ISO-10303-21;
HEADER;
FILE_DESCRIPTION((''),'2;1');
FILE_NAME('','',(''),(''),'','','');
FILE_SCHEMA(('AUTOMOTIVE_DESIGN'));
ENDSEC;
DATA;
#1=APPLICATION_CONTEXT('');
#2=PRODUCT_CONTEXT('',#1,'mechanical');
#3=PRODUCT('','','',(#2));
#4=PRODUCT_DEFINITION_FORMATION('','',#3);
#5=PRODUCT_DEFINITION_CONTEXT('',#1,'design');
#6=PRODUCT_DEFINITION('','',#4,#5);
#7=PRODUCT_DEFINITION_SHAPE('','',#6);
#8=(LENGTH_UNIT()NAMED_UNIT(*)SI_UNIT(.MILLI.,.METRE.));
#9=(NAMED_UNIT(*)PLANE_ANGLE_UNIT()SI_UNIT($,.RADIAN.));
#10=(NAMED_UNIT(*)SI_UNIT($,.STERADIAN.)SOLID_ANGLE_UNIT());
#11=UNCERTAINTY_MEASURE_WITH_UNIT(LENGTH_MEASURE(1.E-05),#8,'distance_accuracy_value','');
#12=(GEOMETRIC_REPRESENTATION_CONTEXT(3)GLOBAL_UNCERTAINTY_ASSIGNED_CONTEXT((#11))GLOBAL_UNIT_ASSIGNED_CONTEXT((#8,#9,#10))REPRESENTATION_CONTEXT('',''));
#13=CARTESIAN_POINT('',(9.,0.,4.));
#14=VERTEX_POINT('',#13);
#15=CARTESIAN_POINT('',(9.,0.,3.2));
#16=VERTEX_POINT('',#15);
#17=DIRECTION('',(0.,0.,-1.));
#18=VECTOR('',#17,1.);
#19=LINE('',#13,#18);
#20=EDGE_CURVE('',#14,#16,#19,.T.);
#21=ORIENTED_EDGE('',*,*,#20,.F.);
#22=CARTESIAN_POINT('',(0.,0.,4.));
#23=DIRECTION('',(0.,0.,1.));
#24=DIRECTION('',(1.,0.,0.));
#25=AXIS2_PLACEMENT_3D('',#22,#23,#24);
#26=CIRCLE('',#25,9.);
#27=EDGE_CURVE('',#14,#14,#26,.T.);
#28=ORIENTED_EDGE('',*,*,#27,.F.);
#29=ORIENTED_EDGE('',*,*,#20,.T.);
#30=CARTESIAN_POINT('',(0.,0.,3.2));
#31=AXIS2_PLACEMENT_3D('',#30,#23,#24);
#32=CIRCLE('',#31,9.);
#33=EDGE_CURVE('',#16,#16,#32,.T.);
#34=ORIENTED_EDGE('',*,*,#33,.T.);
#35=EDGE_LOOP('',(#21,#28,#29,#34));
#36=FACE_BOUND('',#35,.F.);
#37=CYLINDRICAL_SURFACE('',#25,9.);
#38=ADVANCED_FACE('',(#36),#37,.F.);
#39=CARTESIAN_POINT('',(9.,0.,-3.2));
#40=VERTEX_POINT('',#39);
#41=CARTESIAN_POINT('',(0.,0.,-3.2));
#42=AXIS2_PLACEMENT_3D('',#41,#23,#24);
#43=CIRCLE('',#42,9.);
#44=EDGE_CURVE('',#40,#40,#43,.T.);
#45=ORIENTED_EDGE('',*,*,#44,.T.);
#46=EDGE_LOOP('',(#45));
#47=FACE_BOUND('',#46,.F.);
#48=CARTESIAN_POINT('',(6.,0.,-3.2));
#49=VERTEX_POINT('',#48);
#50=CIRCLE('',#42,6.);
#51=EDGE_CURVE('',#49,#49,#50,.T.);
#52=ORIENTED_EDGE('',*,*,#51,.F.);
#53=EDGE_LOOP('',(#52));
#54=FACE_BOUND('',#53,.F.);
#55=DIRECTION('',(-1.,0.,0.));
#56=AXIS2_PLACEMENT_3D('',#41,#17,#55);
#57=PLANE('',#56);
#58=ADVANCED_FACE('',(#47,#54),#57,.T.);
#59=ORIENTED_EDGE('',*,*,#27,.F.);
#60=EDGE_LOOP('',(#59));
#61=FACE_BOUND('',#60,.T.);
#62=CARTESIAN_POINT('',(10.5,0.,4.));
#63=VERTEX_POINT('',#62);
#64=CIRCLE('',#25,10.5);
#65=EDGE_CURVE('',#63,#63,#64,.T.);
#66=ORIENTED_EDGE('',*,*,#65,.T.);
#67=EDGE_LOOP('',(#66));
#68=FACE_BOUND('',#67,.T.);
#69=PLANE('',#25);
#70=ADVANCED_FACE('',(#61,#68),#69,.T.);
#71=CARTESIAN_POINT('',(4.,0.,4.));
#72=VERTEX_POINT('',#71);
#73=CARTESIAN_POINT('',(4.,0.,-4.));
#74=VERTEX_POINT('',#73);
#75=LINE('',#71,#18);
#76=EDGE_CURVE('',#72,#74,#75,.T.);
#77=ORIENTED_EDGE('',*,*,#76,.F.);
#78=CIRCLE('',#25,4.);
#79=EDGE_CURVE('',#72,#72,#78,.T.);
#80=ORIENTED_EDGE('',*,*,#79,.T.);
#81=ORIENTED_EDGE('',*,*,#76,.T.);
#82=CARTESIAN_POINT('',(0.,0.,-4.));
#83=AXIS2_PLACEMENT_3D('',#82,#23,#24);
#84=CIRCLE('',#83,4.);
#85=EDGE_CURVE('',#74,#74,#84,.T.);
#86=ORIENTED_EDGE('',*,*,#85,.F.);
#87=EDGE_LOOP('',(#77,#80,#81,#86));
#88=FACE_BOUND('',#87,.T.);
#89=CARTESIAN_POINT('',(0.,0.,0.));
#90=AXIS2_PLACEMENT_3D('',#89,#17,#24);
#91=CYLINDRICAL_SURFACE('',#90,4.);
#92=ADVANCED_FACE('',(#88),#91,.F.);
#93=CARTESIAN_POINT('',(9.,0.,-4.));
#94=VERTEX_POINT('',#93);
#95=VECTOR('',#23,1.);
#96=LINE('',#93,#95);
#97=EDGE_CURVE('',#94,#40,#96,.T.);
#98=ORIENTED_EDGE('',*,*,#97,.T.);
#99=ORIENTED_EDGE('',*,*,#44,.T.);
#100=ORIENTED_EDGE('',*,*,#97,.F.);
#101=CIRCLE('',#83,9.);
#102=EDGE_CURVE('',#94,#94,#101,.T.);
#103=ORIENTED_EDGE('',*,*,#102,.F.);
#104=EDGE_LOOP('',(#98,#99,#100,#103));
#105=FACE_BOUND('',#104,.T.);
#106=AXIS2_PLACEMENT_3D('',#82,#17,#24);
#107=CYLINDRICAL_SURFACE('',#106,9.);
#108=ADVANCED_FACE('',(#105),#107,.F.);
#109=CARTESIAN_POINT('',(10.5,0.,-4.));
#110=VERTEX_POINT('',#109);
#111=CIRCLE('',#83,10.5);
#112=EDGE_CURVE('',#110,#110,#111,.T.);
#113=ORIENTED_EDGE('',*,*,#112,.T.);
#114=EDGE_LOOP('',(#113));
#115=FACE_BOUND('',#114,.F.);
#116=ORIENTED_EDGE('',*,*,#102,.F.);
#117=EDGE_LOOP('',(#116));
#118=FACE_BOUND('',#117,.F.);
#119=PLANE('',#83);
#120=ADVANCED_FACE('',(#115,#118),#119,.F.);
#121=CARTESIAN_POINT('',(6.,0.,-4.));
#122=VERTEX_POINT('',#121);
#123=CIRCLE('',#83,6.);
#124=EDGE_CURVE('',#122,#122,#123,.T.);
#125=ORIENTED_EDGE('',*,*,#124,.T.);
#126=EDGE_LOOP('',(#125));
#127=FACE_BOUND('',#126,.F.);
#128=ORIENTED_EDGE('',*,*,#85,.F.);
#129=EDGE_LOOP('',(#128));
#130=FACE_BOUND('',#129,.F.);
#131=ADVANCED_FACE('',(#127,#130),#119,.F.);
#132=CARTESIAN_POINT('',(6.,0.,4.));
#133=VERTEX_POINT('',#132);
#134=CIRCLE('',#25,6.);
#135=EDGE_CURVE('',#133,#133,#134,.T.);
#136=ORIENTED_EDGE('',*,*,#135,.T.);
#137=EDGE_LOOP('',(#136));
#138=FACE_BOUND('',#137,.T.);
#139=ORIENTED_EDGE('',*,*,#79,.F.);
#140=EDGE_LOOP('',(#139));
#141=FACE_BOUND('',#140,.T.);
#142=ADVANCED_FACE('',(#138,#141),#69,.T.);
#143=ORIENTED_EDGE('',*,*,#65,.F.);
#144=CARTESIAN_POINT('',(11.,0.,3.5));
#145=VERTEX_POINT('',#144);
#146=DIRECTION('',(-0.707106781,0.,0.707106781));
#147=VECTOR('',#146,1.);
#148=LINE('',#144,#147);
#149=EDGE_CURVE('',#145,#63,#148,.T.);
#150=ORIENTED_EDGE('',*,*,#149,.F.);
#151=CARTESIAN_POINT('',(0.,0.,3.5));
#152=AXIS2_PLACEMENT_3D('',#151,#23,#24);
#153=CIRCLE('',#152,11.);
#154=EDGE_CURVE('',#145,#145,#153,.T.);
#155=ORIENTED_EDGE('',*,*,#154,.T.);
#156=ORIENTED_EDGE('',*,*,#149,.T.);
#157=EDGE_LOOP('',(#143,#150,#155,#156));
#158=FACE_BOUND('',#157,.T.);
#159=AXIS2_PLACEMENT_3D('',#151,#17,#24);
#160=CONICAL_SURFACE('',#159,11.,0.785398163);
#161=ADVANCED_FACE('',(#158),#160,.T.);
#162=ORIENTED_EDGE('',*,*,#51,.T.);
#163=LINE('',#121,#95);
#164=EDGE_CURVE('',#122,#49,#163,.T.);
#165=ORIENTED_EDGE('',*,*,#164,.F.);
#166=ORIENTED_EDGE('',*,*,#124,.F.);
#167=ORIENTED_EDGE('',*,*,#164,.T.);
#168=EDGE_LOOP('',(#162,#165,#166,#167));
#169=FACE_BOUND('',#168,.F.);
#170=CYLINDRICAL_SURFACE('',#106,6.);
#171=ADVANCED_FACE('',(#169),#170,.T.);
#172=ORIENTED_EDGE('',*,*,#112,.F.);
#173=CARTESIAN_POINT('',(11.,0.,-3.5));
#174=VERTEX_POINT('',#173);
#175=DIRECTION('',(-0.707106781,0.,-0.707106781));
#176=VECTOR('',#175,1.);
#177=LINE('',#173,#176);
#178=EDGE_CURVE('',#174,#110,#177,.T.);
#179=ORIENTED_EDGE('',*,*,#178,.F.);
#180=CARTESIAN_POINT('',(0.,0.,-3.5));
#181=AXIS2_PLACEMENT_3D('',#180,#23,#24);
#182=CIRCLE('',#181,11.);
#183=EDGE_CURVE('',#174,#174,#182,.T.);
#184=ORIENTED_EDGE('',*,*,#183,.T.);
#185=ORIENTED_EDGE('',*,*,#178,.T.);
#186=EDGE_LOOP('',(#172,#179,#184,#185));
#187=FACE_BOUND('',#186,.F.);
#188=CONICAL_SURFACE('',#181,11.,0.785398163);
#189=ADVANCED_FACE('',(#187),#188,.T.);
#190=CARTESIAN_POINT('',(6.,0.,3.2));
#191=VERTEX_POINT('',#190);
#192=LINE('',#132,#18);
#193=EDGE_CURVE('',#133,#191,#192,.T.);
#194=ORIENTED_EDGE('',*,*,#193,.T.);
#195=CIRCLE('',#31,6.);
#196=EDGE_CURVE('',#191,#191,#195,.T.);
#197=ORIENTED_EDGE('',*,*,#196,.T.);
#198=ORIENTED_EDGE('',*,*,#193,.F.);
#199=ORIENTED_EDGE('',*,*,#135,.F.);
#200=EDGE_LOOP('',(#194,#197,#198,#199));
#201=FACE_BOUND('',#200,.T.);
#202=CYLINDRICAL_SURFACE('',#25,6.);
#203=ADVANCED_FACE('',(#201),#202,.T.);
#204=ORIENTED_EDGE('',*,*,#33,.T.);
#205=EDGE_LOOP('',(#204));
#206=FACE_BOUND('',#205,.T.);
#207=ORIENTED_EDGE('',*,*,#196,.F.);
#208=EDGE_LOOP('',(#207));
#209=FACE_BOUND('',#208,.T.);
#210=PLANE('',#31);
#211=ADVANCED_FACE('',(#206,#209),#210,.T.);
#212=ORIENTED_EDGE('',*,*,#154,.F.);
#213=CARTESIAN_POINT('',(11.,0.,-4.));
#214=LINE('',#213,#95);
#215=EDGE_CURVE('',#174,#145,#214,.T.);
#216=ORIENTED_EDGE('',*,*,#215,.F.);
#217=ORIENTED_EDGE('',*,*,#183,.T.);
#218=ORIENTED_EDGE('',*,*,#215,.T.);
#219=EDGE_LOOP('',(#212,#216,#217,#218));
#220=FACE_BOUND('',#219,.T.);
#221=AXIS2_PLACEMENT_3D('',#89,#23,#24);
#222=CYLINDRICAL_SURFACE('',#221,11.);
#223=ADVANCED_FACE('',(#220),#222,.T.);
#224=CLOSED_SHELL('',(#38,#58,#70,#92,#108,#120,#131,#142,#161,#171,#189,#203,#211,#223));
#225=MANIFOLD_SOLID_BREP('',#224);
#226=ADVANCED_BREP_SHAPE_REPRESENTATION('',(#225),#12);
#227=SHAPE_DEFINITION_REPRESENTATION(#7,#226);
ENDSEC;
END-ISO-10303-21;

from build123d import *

# Parameters (mm, degrees)
F0_R     = 11
F0_R_2   = 4
F1_DEPTH = 4
F2_R     = 9
F2_R_2   = 6
F3_DEPTH = 0.8
F4_SIZE  = 0.5


# Not quite as in the source:
# - a pattern or mirror of a feature is missing from the dataset's text; its kind, count and spacing are read off the source's solid


with BuildPart() as f1:
    # F0 (on Top) → F1 (new body, symmetric)
    with BuildSketch(Plane.XY):
        Circle(F0_R)
        Circle(F0_R_2, mode=Mode.SUBTRACT)
    extrude(amount=F1_DEPTH, both=True)

    # F2 (on face) → F3 (cut)
    with BuildSketch(Plane.XY.offset(4)):
        Circle(F2_R)
        Circle(F2_R_2, mode=Mode.SUBTRACT)
    f3 = extrude(amount=-F3_DEPTH, mode=Mode.SUBTRACT)

    # F3_copies: F3 across plane
    add(f3.mirror(Plane(origin=(0, 0, 0), x_dir=(-1, 0, 0), z_dir=(0, 0, -1))), mode=Mode.SUBTRACT)

    # F4
    f4_edges = [f1.edges().sort_by_distance(p)[0] for p in [
        (-11, 0, 4),
        (-11, 0, -4),
    ]]
    chamfer(f4_edges, length=F4_SIZE)


solid = f1.part
